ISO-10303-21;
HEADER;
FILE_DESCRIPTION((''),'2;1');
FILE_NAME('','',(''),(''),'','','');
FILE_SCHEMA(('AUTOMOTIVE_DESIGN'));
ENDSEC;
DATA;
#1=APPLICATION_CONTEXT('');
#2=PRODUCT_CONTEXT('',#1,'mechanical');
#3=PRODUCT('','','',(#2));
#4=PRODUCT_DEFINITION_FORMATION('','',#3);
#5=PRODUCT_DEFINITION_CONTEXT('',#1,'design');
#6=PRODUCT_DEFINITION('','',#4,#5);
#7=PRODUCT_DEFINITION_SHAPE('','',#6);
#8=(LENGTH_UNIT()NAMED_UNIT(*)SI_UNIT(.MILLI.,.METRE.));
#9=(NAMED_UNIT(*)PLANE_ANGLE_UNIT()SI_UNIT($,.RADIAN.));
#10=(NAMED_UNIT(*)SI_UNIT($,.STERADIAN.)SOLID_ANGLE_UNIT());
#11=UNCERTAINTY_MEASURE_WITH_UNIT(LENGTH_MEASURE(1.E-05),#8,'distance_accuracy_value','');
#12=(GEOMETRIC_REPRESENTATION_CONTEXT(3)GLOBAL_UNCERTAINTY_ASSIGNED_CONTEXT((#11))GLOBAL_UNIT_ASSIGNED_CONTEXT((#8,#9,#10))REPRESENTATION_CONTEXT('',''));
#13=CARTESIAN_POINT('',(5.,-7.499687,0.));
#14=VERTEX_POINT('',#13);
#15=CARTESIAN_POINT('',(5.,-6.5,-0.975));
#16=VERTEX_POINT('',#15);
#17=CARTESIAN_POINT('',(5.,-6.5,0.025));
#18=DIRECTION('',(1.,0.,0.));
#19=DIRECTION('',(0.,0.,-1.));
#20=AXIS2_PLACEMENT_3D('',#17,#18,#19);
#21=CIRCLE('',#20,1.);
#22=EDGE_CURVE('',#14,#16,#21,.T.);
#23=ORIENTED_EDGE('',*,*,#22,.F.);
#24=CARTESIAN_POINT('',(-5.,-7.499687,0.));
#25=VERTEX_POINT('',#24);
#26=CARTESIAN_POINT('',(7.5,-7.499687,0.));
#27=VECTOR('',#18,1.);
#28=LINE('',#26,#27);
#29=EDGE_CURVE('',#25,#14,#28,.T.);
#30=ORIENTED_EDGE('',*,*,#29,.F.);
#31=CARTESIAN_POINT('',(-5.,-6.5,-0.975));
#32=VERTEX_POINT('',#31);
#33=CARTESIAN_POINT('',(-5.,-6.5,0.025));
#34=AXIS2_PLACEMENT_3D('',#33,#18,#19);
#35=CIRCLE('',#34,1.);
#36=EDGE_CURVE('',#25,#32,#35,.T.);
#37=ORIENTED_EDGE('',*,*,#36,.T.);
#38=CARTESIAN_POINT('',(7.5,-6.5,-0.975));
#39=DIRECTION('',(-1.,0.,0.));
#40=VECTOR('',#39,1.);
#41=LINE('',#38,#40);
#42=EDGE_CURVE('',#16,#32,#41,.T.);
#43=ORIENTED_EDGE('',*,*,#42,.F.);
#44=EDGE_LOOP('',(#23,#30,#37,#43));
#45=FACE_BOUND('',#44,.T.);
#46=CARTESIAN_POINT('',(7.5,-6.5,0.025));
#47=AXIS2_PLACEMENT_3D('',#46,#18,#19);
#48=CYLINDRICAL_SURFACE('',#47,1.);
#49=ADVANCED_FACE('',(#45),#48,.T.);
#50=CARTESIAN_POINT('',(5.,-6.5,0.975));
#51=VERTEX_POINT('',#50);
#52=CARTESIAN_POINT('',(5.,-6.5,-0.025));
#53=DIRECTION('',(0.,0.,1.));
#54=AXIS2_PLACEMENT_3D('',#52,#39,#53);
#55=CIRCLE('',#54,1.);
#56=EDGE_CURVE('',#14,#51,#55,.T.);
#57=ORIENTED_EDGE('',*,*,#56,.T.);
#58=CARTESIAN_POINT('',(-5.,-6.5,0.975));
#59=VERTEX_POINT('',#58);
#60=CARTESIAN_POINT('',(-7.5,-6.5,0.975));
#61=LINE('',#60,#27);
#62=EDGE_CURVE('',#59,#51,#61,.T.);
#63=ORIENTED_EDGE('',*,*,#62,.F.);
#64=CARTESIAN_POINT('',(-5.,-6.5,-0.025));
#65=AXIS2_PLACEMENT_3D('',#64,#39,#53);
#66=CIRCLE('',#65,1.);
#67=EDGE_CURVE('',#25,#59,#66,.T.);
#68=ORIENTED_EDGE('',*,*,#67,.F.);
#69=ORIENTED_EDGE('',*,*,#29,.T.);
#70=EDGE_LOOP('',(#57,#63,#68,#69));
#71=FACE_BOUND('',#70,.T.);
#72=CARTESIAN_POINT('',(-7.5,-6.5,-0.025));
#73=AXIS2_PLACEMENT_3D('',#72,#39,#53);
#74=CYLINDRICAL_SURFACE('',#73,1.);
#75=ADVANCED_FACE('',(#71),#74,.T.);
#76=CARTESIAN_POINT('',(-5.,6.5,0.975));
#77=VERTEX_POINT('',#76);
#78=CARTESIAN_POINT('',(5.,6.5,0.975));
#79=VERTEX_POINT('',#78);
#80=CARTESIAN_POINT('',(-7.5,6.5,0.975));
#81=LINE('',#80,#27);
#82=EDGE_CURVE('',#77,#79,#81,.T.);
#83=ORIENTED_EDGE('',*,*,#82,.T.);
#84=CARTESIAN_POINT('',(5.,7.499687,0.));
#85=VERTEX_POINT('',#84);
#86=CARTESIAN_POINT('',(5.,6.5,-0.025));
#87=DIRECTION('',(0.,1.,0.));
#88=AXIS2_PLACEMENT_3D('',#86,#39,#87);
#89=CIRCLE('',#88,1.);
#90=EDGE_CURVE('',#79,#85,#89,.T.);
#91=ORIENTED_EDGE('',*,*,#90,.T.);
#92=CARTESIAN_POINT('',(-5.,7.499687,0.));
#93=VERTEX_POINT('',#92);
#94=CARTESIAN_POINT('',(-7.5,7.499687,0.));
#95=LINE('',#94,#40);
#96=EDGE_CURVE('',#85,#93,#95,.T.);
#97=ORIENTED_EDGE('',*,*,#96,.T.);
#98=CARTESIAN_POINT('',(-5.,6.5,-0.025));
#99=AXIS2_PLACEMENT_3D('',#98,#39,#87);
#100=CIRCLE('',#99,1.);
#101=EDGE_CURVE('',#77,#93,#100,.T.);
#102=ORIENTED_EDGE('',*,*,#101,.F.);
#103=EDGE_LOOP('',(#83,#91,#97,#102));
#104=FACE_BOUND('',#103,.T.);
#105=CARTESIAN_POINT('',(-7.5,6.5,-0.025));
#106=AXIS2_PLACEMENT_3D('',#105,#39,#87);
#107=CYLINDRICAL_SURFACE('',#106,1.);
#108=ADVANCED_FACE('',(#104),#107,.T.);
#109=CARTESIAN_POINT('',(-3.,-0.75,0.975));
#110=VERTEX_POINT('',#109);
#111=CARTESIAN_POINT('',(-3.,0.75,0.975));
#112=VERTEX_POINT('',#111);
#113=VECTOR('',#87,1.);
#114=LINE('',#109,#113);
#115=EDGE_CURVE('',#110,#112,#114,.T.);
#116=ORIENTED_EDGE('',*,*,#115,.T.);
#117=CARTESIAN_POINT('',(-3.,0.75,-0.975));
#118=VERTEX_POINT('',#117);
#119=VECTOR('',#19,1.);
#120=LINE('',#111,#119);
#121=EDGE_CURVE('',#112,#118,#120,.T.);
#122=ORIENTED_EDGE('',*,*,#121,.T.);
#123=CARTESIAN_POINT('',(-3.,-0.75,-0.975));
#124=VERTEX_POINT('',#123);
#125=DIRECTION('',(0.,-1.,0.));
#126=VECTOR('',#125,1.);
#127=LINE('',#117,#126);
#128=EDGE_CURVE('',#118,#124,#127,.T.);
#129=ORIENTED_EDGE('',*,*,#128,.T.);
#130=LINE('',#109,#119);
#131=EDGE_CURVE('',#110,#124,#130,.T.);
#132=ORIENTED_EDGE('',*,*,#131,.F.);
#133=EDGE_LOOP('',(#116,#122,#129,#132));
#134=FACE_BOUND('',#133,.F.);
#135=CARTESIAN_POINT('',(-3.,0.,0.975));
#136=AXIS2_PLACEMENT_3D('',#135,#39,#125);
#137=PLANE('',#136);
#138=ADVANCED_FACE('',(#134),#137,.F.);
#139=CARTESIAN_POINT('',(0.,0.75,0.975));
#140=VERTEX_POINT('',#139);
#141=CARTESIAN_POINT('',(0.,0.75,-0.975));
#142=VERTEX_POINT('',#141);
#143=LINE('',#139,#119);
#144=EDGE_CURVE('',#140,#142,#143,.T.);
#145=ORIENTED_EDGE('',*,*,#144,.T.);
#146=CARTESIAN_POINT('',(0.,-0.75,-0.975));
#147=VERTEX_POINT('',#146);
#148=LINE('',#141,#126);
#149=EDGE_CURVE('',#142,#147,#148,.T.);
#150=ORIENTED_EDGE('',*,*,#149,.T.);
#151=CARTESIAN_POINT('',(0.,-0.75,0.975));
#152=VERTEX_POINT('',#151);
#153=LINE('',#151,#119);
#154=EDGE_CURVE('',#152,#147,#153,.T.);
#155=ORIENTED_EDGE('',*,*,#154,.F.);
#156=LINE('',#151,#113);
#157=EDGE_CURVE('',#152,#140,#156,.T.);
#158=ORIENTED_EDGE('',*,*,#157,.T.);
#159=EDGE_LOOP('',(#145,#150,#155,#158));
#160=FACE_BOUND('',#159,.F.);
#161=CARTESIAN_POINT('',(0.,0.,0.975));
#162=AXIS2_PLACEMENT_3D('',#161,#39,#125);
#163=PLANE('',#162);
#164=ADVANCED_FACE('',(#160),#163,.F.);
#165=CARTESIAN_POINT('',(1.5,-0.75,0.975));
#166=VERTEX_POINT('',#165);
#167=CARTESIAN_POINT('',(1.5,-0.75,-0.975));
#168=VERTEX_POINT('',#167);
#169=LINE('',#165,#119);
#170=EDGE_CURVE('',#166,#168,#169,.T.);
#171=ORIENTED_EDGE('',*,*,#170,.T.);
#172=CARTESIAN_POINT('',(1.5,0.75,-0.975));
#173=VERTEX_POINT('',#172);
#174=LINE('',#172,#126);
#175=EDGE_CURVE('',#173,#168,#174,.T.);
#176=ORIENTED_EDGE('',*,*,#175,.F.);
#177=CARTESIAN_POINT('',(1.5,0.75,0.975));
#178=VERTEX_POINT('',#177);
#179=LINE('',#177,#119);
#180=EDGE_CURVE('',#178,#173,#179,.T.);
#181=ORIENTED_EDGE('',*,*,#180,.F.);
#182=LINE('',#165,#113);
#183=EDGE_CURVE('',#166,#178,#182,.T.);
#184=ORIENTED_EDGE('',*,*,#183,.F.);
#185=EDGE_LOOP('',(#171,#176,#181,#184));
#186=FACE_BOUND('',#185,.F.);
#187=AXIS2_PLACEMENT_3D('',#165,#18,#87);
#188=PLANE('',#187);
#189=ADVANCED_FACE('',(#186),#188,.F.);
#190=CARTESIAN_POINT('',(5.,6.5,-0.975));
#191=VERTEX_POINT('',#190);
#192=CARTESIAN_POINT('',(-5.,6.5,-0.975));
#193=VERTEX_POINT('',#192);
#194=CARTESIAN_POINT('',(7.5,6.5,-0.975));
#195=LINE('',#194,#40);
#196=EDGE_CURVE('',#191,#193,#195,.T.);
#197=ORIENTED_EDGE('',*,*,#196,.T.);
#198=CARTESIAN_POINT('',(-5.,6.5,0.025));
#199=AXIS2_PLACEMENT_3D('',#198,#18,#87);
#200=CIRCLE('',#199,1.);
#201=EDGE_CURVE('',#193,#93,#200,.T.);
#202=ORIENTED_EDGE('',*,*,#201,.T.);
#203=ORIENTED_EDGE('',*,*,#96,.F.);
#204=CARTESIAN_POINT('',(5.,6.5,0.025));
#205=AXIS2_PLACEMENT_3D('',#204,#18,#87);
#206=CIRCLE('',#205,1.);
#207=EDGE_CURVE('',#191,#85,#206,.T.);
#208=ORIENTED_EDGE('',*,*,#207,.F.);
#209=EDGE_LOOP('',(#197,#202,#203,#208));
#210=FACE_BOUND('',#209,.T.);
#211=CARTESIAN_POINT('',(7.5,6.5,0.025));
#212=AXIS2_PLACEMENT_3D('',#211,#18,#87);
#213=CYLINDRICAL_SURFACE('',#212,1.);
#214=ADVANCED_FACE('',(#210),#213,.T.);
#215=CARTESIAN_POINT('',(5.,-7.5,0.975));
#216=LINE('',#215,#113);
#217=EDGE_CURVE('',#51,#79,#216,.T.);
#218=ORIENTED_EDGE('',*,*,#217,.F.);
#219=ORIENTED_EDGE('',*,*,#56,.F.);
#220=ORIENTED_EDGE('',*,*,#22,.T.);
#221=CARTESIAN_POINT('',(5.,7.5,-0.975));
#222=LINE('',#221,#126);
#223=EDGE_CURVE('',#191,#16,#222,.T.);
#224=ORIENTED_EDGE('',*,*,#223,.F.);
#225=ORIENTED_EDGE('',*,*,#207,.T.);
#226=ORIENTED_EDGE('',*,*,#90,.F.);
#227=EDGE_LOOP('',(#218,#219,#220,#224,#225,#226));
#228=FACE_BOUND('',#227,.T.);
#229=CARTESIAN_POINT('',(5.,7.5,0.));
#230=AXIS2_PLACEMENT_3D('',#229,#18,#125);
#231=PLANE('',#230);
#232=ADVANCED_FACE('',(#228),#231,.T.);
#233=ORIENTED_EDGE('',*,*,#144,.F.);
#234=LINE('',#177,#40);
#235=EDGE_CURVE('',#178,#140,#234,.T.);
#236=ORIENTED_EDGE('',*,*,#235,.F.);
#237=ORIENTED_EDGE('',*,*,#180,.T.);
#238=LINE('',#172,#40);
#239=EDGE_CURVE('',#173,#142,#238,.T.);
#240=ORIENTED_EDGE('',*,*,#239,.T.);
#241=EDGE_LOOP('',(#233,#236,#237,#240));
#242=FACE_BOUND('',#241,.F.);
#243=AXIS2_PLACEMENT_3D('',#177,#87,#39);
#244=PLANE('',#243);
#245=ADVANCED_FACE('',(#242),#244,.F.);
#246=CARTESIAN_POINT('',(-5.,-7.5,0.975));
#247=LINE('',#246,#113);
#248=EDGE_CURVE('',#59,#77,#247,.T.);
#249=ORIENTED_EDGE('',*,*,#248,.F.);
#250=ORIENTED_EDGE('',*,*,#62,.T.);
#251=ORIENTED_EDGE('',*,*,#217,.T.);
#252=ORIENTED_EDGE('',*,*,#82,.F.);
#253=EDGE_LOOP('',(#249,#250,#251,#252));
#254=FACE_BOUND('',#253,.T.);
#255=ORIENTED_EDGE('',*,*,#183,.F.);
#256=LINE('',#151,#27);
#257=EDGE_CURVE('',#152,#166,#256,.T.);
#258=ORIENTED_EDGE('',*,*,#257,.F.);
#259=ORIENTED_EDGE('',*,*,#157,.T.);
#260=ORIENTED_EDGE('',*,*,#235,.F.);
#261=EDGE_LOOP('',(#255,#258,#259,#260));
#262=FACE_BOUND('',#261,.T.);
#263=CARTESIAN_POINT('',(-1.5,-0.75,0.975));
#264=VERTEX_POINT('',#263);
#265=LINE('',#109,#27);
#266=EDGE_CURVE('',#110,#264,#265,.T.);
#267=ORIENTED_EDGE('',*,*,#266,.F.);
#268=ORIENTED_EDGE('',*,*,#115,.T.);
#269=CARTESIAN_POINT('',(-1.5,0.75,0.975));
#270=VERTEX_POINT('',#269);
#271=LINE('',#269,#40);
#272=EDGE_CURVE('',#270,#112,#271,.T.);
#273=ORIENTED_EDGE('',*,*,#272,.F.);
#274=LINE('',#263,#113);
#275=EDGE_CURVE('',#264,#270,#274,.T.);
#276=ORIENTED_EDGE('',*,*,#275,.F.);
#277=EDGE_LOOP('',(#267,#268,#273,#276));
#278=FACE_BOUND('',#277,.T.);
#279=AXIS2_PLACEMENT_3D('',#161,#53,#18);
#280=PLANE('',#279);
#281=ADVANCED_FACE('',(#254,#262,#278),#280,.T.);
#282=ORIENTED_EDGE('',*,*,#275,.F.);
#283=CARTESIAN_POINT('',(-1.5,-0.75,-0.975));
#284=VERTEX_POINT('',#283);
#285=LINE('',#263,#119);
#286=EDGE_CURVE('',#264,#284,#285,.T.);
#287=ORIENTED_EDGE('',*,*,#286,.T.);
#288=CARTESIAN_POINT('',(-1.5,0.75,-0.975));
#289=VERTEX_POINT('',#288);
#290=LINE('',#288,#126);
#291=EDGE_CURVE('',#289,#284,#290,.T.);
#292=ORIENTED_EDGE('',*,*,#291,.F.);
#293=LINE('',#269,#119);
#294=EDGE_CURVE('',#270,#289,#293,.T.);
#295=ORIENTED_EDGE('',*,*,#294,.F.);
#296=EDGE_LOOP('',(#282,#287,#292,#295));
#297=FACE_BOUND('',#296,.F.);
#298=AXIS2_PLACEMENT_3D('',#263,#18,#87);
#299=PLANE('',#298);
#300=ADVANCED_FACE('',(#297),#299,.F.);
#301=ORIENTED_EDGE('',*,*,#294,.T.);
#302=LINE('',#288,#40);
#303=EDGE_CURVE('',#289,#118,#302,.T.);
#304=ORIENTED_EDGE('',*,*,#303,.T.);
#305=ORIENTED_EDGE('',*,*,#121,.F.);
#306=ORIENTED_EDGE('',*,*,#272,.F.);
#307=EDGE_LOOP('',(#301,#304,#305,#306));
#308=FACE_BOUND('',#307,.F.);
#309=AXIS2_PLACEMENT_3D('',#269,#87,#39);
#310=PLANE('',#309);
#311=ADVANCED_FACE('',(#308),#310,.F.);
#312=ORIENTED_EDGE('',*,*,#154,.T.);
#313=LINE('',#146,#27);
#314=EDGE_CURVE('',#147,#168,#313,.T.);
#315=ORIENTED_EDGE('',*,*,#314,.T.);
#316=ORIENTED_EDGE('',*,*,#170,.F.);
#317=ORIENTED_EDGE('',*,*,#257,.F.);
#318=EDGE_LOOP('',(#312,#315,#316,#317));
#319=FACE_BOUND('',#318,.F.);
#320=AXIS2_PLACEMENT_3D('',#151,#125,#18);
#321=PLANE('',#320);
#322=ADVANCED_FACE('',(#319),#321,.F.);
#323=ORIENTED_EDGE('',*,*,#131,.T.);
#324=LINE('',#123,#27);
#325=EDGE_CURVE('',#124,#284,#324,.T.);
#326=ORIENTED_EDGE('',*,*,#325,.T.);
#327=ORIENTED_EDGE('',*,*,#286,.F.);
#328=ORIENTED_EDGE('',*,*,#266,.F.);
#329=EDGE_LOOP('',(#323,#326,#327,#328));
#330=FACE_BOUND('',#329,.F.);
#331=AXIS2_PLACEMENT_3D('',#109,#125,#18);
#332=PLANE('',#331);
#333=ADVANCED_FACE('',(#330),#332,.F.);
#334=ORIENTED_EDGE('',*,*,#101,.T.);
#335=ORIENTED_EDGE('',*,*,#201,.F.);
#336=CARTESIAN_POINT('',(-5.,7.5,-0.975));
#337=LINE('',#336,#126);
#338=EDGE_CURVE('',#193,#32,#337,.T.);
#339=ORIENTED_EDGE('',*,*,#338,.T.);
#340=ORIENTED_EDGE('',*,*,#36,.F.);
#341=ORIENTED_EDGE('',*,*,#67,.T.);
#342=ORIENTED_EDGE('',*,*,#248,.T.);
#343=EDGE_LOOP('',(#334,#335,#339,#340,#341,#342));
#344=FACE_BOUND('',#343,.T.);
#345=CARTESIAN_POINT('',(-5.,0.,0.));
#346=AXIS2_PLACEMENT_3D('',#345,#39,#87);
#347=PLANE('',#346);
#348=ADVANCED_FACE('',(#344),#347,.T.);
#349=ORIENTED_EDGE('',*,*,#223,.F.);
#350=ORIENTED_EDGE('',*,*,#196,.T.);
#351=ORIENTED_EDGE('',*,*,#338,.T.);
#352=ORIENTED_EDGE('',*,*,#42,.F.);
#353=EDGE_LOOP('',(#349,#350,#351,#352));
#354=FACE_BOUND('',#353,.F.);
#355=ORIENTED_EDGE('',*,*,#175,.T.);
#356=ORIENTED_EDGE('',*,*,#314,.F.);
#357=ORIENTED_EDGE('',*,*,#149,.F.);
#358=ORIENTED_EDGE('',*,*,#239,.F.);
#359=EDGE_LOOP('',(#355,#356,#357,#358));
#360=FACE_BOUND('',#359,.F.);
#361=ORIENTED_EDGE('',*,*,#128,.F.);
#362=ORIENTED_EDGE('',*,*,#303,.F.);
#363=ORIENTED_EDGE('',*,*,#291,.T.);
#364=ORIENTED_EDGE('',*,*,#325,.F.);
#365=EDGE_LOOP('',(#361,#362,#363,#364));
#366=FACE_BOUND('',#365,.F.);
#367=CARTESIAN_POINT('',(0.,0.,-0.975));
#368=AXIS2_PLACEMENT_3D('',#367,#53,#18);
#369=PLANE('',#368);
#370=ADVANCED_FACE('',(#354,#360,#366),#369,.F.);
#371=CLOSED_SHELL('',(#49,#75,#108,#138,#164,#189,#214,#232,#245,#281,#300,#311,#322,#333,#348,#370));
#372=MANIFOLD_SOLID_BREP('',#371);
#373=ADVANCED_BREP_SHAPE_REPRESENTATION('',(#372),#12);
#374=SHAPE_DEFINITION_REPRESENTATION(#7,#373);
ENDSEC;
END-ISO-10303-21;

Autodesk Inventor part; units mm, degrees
sketch "Skizze1" plane through (0, 0, 0) normal (0, 0, 1) x (1, 0, 0)
  line L0 (-5, 7.5) -> (5, 7.5)
  line L1 (5, 7.5) -> (5, -7.5)
  line L2 (5, -7.5) -> (-5, -7.5)
  line L3 (-5, -7.5) -> (-5, 7.5)
  line L4 (-7, 0) -> (7, 0) projected
  line L5 (0, 10.5) -> (0, -10.5) projected
  point P0 (0, 0)
  dimension "d0" = 10
  dimension "d1" = 15
extrude "Extrusion1" add sketch "Skizze1" along normal mid plane 1.95
sketch "Skizze2" plane through (0, 0, 0.975) normal (0, 0, 1) x (1, 0, 0)
  line L0 (-5, 7.5) -> (-5, -7.5) projected
  line L1 (-3, -0.75) -> (-1.5, -0.75)
  line L2 (-1.5, -0.75) -> (-1.5, 0.75)
  line L3 (-1.5, 0.75) -> (-3, 0.75)
  line L4 (-3, 0.75) -> (-3, -0.75)
  line L5 (0, -0.75) -> (1.5, -0.75)
  line L6 (1.5, -0.75) -> (1.5, 0.75)
  line L7 (1.5, 0.75) -> (0, 0.75)
  line L8 (0, 0.75) -> (0, -0.75)
  line L9 (-7, 0) -> (7, 0) projected
  point P0 (0, 0)
  dimension "d4" = 1.5
  dimension "d5" = 2
  dimension "d6" = 1.5
  dimension "d7" = 1.5
  dimension "d8" = 1.5
extrude "Extrusion2" cut sketch "Skizze2" against normal blind 1.95
fillet "Rundung1" radius 1 4 edges at (0, 7.5, 0.975) (0, 7.5, -0.975) (0, -7.5, -0.975) (0, -7.5, 0.975)
properties part number "ChassisRechtsUntenKlappeSchluessel"
